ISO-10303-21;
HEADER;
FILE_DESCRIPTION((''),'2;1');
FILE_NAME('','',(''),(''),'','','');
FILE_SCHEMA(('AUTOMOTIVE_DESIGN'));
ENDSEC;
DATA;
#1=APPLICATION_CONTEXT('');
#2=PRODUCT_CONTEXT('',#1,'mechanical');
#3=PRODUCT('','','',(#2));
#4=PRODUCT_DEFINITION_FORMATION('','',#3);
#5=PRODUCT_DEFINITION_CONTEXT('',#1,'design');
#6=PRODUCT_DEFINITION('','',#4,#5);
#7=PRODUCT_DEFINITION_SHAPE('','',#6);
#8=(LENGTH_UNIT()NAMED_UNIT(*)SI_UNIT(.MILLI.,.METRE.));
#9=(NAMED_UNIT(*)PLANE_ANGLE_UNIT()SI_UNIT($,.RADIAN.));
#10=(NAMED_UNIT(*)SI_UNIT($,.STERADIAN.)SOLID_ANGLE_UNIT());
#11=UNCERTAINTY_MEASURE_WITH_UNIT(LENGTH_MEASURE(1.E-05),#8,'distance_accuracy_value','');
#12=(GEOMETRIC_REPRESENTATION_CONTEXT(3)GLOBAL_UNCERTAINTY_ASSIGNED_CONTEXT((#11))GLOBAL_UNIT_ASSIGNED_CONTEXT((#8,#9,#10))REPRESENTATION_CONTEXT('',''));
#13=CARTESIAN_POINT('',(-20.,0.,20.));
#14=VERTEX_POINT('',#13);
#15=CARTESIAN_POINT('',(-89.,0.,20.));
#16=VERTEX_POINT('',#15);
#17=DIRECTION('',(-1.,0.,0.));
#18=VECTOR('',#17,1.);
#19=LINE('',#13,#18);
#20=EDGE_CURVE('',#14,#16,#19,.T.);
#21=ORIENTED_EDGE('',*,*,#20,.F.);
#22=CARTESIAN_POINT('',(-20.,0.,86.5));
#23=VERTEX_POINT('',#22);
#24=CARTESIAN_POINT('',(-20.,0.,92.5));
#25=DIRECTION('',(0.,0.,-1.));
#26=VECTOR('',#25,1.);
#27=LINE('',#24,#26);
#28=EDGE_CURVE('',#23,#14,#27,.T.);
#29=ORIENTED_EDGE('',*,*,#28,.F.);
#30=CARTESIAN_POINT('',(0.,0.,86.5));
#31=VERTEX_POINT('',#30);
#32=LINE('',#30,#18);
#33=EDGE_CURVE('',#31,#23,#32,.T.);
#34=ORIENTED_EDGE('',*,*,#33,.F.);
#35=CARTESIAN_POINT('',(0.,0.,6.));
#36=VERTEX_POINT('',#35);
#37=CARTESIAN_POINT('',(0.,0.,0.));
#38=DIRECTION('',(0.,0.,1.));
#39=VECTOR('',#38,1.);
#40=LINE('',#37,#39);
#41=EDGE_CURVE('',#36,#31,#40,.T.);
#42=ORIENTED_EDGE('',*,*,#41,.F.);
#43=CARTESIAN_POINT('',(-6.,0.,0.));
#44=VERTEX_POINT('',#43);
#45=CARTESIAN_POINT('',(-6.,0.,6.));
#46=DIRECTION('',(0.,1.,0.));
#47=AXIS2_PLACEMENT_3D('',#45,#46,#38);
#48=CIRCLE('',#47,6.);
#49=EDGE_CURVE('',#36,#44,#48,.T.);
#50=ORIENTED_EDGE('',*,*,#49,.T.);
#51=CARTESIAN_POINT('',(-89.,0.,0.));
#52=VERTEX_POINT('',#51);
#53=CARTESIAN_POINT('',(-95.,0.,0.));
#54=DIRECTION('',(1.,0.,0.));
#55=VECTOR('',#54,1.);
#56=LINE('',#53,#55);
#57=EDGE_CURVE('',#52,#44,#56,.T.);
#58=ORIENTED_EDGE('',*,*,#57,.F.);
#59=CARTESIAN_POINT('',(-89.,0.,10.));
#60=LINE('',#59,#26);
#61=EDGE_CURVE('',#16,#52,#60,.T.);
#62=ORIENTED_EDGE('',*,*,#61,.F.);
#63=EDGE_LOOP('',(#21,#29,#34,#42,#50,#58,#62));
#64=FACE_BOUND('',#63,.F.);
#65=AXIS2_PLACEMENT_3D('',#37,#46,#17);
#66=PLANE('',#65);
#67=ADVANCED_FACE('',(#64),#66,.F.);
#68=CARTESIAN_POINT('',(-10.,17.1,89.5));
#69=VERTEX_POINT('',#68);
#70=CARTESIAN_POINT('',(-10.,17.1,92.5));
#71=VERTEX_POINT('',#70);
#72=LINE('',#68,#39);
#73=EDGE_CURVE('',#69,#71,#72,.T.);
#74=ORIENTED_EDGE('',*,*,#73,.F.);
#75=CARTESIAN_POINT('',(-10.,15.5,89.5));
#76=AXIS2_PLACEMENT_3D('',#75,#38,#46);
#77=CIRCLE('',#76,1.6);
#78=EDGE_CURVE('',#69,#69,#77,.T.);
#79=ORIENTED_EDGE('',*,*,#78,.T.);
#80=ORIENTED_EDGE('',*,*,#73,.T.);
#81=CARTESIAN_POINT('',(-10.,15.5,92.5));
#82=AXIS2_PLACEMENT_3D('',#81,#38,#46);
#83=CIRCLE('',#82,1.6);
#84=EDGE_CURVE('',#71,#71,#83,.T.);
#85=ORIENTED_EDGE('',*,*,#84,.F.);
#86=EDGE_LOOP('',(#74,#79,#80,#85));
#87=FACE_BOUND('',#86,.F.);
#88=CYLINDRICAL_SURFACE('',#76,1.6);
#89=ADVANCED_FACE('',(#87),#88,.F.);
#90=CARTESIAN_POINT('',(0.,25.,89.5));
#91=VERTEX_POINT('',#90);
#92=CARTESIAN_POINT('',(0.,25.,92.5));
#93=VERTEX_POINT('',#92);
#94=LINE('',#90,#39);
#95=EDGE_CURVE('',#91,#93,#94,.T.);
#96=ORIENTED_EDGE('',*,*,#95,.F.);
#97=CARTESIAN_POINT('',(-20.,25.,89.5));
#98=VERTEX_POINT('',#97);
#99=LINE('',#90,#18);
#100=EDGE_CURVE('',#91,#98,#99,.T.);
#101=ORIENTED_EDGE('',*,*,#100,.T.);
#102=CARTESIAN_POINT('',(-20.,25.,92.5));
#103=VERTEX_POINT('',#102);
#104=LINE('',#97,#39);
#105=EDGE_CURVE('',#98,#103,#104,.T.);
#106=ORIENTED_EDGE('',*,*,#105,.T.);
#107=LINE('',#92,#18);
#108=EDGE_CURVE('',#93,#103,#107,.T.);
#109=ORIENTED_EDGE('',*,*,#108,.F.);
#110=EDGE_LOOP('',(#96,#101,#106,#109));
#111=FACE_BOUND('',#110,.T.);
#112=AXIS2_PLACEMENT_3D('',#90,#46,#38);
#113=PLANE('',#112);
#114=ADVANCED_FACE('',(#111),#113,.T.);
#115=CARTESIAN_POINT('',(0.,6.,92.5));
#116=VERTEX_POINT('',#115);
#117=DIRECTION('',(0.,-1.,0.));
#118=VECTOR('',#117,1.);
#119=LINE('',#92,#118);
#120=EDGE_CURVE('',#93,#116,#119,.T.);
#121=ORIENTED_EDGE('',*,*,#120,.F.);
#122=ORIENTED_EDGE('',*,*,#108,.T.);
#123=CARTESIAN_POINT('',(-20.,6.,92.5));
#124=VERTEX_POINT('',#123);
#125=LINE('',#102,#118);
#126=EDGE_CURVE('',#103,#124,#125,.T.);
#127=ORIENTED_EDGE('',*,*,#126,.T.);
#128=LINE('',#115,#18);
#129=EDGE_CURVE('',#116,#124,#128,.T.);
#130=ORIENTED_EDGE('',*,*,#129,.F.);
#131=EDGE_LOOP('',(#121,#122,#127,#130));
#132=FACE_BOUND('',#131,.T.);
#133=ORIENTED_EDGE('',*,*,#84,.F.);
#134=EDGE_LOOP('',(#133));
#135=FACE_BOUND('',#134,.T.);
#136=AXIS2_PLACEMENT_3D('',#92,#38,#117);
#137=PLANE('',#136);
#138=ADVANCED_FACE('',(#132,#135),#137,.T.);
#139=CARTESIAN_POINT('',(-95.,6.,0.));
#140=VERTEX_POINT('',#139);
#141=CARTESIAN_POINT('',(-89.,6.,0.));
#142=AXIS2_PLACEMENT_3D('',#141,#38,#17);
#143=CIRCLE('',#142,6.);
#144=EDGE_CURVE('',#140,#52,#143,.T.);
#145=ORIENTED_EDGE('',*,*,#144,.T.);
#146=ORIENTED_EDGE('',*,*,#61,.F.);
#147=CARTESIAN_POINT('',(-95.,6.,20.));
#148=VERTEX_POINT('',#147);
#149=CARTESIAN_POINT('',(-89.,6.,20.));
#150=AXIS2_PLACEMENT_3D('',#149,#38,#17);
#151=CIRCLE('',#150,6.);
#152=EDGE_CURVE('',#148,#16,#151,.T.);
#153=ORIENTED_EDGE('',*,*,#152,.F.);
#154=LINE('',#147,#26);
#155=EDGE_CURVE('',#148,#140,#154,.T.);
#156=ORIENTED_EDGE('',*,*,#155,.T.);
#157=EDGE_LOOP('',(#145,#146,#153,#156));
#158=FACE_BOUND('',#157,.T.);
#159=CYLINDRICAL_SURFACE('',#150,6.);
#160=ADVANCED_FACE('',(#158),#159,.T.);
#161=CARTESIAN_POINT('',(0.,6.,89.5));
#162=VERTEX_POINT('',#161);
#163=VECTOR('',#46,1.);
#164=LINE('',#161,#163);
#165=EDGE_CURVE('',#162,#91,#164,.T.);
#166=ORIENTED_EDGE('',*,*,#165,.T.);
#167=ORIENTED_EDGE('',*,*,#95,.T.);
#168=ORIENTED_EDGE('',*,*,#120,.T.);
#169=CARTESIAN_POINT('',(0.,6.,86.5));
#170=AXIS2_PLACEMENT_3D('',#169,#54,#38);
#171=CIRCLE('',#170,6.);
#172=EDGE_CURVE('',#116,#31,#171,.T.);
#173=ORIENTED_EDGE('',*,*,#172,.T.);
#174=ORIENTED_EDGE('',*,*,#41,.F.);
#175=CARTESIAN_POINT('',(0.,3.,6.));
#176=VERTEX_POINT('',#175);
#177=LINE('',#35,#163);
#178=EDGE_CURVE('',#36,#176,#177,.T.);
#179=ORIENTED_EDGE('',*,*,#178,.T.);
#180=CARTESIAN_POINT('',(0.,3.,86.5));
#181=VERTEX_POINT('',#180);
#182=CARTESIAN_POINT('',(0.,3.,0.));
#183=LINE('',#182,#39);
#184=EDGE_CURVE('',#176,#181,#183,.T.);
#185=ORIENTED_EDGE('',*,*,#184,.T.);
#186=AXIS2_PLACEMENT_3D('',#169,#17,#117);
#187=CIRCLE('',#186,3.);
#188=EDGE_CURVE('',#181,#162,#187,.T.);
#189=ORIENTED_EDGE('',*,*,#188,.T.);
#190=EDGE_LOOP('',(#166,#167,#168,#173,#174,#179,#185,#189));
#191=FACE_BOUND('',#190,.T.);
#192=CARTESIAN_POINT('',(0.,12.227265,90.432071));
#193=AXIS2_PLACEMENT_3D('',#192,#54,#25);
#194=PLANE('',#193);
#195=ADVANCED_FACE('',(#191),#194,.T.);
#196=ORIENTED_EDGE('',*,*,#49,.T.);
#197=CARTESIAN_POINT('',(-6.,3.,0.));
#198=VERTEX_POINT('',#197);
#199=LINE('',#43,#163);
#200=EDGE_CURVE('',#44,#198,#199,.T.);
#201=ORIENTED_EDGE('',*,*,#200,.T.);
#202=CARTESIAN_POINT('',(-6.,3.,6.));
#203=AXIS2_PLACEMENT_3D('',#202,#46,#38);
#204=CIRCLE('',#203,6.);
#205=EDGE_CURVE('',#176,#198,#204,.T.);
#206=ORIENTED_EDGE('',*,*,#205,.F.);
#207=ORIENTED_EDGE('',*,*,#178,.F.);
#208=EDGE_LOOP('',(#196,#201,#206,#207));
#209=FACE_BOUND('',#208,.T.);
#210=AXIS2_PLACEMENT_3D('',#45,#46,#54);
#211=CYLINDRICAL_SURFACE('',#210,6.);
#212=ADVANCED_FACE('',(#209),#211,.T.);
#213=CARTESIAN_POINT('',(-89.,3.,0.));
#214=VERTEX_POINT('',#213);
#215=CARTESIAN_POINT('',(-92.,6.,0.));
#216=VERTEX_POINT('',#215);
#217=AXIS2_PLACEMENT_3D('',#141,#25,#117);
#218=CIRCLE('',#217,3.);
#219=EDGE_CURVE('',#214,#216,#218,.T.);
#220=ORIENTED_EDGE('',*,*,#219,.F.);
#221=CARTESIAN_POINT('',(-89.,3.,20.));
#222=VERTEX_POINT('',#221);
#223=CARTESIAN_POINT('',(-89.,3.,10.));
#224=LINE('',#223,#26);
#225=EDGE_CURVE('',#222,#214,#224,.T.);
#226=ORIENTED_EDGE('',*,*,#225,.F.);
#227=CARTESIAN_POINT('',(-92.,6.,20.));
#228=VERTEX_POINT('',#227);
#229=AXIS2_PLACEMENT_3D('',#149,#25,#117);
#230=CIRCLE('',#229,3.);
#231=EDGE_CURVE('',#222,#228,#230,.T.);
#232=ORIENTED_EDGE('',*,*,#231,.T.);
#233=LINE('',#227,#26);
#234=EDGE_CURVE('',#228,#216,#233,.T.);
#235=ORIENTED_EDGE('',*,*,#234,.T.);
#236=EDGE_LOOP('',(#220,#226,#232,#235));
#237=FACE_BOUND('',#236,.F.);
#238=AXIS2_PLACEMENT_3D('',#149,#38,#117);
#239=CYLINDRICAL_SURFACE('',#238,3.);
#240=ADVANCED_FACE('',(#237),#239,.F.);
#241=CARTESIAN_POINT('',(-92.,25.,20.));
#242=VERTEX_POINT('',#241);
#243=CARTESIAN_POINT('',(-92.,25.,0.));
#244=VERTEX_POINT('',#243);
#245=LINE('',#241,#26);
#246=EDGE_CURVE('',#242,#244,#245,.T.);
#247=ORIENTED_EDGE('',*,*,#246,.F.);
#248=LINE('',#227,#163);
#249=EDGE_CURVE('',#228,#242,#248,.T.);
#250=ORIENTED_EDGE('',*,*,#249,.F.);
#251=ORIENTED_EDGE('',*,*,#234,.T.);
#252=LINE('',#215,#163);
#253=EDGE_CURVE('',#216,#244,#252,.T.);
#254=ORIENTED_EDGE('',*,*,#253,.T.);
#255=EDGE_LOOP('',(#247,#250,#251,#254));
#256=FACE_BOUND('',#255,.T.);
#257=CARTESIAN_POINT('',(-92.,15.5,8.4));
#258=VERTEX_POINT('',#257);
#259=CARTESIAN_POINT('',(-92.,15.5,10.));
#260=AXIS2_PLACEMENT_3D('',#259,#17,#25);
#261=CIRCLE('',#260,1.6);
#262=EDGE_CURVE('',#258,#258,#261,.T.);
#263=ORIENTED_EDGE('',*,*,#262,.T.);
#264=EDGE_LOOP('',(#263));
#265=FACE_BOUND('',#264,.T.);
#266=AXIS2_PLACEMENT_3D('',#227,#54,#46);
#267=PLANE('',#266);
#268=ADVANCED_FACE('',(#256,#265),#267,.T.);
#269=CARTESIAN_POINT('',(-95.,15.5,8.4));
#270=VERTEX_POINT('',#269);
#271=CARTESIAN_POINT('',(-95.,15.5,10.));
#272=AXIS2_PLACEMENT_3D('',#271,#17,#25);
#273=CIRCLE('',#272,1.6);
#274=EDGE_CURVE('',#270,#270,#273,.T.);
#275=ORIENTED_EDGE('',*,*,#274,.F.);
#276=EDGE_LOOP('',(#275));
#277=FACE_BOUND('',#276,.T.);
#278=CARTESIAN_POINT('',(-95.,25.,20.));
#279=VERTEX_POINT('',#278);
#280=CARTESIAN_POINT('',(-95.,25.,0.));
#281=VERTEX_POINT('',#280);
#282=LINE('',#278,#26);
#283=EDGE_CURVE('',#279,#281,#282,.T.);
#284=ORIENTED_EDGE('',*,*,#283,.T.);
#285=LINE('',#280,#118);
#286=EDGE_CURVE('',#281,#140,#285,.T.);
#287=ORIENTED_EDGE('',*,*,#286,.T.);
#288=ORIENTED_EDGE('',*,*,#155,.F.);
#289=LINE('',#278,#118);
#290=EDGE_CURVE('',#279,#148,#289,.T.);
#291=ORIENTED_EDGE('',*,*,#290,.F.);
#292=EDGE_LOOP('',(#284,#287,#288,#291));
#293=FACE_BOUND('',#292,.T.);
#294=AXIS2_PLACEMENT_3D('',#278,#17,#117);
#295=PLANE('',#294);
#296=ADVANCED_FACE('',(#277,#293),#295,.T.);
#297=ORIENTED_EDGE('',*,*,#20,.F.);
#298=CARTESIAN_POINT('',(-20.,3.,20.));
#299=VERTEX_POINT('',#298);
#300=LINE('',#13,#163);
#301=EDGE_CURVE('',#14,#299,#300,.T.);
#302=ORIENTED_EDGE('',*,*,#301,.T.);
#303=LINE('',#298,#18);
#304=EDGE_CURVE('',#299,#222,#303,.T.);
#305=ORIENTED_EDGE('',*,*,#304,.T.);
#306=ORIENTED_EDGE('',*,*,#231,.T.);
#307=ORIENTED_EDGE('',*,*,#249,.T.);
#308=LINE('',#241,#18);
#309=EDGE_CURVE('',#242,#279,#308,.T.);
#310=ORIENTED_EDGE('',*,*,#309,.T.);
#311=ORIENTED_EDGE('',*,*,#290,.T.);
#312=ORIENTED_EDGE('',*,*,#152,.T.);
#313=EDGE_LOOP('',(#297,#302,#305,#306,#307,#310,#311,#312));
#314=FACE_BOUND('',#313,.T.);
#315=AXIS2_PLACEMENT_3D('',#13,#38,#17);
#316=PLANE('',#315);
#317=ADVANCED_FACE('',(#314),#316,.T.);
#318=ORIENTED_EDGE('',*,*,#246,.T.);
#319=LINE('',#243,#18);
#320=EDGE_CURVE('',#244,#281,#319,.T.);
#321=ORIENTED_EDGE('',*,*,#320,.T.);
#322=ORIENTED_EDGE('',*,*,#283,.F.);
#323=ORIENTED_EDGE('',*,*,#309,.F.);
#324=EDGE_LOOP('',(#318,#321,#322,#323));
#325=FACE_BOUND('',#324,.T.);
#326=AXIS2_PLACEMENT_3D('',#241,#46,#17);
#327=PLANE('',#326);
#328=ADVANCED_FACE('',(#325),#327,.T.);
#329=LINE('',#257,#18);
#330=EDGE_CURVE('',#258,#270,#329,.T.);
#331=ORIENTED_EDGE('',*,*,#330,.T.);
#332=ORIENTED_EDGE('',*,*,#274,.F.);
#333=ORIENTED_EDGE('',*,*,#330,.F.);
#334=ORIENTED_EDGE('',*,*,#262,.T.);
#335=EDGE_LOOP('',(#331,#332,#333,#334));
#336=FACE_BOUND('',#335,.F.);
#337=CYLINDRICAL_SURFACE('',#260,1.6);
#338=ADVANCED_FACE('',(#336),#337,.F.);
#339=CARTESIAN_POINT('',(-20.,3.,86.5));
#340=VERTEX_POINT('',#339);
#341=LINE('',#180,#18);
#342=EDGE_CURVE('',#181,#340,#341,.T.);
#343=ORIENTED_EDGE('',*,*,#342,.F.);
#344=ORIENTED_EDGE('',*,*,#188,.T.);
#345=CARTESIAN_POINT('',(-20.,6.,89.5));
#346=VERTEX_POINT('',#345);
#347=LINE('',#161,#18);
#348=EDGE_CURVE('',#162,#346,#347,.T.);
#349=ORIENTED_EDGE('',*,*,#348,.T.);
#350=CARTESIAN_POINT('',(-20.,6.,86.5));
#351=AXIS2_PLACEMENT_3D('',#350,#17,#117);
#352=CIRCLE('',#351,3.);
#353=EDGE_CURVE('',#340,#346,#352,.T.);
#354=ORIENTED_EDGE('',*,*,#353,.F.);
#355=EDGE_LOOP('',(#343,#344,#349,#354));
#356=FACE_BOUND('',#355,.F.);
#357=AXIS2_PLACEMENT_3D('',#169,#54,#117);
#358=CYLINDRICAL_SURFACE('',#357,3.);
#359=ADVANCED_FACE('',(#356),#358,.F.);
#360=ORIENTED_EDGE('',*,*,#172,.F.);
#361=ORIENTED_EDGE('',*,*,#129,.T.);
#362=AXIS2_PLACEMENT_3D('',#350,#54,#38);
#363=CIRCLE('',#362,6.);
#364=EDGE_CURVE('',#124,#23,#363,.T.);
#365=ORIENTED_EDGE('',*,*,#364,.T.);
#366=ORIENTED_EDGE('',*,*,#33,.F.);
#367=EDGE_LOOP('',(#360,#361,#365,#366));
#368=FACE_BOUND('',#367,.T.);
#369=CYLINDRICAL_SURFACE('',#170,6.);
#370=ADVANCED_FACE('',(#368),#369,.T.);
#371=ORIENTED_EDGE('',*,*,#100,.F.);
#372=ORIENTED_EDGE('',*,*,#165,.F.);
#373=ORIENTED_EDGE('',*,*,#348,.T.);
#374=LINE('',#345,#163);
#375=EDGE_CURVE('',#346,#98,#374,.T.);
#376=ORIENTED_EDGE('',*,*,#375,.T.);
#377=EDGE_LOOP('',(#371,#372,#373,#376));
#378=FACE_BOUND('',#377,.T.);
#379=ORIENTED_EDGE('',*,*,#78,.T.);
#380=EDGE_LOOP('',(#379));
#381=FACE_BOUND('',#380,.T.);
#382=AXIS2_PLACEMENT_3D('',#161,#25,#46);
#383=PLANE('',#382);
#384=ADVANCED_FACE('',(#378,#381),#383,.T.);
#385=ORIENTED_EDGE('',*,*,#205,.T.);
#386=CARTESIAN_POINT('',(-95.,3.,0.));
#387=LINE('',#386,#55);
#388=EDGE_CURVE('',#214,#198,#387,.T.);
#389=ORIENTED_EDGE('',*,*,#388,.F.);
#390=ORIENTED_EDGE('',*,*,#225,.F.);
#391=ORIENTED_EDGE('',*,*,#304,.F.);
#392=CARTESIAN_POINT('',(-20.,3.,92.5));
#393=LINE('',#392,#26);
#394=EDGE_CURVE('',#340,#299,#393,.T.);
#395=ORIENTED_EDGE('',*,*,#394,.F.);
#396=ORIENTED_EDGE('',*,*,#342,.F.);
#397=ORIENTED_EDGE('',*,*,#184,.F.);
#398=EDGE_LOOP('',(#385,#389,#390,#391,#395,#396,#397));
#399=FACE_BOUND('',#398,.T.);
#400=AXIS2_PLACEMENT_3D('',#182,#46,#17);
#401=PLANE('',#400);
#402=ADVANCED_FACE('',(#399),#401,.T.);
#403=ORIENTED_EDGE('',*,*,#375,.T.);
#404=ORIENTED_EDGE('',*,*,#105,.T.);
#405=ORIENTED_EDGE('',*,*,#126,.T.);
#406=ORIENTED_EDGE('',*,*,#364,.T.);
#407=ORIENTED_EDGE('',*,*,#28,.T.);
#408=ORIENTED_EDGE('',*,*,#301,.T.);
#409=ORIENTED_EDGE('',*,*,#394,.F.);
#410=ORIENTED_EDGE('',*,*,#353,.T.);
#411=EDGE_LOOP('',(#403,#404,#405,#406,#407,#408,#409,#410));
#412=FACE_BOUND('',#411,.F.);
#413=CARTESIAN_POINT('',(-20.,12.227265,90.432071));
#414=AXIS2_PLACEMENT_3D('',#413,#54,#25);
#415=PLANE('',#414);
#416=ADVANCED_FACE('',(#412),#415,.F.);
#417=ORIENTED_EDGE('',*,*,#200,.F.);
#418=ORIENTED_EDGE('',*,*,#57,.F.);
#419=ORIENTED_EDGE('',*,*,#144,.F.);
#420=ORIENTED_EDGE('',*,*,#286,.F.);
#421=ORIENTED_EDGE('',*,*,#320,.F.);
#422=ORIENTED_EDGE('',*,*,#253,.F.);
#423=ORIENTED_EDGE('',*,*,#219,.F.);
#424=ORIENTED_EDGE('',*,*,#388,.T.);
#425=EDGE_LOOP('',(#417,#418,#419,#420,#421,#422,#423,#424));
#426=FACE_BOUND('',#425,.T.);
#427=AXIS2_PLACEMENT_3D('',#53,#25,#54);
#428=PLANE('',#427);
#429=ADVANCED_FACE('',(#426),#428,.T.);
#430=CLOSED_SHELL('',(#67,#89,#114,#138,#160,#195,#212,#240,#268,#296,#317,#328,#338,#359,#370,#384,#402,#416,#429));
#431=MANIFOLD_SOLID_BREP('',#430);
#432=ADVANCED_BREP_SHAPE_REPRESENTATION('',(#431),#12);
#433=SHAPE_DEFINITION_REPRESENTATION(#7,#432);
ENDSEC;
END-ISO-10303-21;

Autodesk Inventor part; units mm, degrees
ref_plane "YZ Plane" through (0, 0, 0) normal (1, 0, 0) x (0, 1, 0)
ref_plane "XZ Plane" through (0, 0, 0) normal (0, 1, 0) x (-1, 0, 0)
ref_plane "XY Plane" through (0, 0, 0) normal (0, 0, 1) x (1, 0, 0)
sketch "草圖1" plane through (0, 0, 0) normal (0, 1, 0) x (-1, 0, 0)
  line L0 (0, 0) -> (0, 92.5)
  line L1 (0, 92.5) -> (20, 92.5)
  line L2 (20, 92.5) -> (20, 20)
  line L3 (20, 20) -> (95, 20)
  line L4 (95, 20) -> (95, 0)
  line L5 (95, 0) -> (0, 0)
  dimension "d0" = 92.5
  dimension "d1" = 95
  dimension "d2" = 20
  dimension "d3" = 20
extrude "平板1" add sketch "草圖1" along normal blind 3
fillet "轉角外圓角1" radius 6 1 edges at (0, 1.5, 0)
sketch "草圖2" plane through (0, 0, 89.5) normal (0, 0, 1) x (1, 0, 0)
  line L0 (-20, 0) -> (0, 0)
  line L1 (0, 0) -> (0, 25)
  line L2 (0, 25) -> (-20, 25)
  line L3 (-20, 25) -> (-20, 0)
edge flange "凸緣1" height 25 angle 90 thickness 3 bend radius 3 thickness toward (0, 0, 1) relief tear relief width 3 relief depth 1.5 corner gap 3 corner form 0 edges at (-10, 3, 92.5) (-95, 3, 10) wall of the first edge with corners at (-20, 0, 89.5) (0, 0, 89.5) (0, 25, 89.5) (-20, 25, 89.5)
bend "折彎1"
corner "轉角1"
sketch "草圖3" plane through (-92, 25, 20) normal (1, 0, 0) x (0, 0, -1)
  line L0 (20, 0) -> (0, 0) projected
  line L1 (20, -19) -> (20, 0) projected
  point P0 (20, -25)
  point P1 (10, -9.5)
  point P2 (10, 0)
  point P3 (20, -9.5)
hole "孔1" at (-92, 15.5, 10) direction (-1, 0, 0) diameter 3.2 end through all
sketch "草圖4" plane through (0, 25, 89.5) normal (0, 0, -1) x (-1, 0, 0)
  line L0 (20, 0) -> (0, 0) projected
  line L1 (20, -19) -> (20, 0) projected
  point P0 (0, -25)
  point P1 (10, -9.5)
  point P2 (10, 0)
  point P3 (20, -9.5)
hole "孔2" at (-10, 15.5, 89.5) direction (0, 0, 1) diameter 3.2 end through all
equation "\"d21\" = 厚度"
equation "\"d28\" = 厚度"
equation "\"d4\" = 厚度"
equation "\"d6\" = 折彎離隙寬度"
equation "\"d7\" = 折彎離隙深度"
equation "\"d8\" = 最小剩餘"
equation "\"d9\" = 轉移半徑"
equation "\"d12\" = 折彎半徑"
equation "\"d13\" = 轉角離隙大小"
equation "\"d14\" = 間隙大小"
equation "\"d15\" = Jacobi半徑大小"
equation "\"折彎半徑\" = 厚度"
equation "\"折彎離隙寬度\" = 厚度"
equation "\"折彎離隙深度\" = 0.5 * 厚度"
equation "\"轉角離隙大小\" = 4 * 厚度"
equation "\"最小剩餘\" = 2 * 厚度"
equation "\"轉移半徑\" = 折彎半徑"
equation "\"Jacobi半徑大小\" = 折彎半徑"
equation "\"間隙大小\" = 厚度"
equation "\"厚度\" = 3"
properties part number "鋁擠加強肋"
